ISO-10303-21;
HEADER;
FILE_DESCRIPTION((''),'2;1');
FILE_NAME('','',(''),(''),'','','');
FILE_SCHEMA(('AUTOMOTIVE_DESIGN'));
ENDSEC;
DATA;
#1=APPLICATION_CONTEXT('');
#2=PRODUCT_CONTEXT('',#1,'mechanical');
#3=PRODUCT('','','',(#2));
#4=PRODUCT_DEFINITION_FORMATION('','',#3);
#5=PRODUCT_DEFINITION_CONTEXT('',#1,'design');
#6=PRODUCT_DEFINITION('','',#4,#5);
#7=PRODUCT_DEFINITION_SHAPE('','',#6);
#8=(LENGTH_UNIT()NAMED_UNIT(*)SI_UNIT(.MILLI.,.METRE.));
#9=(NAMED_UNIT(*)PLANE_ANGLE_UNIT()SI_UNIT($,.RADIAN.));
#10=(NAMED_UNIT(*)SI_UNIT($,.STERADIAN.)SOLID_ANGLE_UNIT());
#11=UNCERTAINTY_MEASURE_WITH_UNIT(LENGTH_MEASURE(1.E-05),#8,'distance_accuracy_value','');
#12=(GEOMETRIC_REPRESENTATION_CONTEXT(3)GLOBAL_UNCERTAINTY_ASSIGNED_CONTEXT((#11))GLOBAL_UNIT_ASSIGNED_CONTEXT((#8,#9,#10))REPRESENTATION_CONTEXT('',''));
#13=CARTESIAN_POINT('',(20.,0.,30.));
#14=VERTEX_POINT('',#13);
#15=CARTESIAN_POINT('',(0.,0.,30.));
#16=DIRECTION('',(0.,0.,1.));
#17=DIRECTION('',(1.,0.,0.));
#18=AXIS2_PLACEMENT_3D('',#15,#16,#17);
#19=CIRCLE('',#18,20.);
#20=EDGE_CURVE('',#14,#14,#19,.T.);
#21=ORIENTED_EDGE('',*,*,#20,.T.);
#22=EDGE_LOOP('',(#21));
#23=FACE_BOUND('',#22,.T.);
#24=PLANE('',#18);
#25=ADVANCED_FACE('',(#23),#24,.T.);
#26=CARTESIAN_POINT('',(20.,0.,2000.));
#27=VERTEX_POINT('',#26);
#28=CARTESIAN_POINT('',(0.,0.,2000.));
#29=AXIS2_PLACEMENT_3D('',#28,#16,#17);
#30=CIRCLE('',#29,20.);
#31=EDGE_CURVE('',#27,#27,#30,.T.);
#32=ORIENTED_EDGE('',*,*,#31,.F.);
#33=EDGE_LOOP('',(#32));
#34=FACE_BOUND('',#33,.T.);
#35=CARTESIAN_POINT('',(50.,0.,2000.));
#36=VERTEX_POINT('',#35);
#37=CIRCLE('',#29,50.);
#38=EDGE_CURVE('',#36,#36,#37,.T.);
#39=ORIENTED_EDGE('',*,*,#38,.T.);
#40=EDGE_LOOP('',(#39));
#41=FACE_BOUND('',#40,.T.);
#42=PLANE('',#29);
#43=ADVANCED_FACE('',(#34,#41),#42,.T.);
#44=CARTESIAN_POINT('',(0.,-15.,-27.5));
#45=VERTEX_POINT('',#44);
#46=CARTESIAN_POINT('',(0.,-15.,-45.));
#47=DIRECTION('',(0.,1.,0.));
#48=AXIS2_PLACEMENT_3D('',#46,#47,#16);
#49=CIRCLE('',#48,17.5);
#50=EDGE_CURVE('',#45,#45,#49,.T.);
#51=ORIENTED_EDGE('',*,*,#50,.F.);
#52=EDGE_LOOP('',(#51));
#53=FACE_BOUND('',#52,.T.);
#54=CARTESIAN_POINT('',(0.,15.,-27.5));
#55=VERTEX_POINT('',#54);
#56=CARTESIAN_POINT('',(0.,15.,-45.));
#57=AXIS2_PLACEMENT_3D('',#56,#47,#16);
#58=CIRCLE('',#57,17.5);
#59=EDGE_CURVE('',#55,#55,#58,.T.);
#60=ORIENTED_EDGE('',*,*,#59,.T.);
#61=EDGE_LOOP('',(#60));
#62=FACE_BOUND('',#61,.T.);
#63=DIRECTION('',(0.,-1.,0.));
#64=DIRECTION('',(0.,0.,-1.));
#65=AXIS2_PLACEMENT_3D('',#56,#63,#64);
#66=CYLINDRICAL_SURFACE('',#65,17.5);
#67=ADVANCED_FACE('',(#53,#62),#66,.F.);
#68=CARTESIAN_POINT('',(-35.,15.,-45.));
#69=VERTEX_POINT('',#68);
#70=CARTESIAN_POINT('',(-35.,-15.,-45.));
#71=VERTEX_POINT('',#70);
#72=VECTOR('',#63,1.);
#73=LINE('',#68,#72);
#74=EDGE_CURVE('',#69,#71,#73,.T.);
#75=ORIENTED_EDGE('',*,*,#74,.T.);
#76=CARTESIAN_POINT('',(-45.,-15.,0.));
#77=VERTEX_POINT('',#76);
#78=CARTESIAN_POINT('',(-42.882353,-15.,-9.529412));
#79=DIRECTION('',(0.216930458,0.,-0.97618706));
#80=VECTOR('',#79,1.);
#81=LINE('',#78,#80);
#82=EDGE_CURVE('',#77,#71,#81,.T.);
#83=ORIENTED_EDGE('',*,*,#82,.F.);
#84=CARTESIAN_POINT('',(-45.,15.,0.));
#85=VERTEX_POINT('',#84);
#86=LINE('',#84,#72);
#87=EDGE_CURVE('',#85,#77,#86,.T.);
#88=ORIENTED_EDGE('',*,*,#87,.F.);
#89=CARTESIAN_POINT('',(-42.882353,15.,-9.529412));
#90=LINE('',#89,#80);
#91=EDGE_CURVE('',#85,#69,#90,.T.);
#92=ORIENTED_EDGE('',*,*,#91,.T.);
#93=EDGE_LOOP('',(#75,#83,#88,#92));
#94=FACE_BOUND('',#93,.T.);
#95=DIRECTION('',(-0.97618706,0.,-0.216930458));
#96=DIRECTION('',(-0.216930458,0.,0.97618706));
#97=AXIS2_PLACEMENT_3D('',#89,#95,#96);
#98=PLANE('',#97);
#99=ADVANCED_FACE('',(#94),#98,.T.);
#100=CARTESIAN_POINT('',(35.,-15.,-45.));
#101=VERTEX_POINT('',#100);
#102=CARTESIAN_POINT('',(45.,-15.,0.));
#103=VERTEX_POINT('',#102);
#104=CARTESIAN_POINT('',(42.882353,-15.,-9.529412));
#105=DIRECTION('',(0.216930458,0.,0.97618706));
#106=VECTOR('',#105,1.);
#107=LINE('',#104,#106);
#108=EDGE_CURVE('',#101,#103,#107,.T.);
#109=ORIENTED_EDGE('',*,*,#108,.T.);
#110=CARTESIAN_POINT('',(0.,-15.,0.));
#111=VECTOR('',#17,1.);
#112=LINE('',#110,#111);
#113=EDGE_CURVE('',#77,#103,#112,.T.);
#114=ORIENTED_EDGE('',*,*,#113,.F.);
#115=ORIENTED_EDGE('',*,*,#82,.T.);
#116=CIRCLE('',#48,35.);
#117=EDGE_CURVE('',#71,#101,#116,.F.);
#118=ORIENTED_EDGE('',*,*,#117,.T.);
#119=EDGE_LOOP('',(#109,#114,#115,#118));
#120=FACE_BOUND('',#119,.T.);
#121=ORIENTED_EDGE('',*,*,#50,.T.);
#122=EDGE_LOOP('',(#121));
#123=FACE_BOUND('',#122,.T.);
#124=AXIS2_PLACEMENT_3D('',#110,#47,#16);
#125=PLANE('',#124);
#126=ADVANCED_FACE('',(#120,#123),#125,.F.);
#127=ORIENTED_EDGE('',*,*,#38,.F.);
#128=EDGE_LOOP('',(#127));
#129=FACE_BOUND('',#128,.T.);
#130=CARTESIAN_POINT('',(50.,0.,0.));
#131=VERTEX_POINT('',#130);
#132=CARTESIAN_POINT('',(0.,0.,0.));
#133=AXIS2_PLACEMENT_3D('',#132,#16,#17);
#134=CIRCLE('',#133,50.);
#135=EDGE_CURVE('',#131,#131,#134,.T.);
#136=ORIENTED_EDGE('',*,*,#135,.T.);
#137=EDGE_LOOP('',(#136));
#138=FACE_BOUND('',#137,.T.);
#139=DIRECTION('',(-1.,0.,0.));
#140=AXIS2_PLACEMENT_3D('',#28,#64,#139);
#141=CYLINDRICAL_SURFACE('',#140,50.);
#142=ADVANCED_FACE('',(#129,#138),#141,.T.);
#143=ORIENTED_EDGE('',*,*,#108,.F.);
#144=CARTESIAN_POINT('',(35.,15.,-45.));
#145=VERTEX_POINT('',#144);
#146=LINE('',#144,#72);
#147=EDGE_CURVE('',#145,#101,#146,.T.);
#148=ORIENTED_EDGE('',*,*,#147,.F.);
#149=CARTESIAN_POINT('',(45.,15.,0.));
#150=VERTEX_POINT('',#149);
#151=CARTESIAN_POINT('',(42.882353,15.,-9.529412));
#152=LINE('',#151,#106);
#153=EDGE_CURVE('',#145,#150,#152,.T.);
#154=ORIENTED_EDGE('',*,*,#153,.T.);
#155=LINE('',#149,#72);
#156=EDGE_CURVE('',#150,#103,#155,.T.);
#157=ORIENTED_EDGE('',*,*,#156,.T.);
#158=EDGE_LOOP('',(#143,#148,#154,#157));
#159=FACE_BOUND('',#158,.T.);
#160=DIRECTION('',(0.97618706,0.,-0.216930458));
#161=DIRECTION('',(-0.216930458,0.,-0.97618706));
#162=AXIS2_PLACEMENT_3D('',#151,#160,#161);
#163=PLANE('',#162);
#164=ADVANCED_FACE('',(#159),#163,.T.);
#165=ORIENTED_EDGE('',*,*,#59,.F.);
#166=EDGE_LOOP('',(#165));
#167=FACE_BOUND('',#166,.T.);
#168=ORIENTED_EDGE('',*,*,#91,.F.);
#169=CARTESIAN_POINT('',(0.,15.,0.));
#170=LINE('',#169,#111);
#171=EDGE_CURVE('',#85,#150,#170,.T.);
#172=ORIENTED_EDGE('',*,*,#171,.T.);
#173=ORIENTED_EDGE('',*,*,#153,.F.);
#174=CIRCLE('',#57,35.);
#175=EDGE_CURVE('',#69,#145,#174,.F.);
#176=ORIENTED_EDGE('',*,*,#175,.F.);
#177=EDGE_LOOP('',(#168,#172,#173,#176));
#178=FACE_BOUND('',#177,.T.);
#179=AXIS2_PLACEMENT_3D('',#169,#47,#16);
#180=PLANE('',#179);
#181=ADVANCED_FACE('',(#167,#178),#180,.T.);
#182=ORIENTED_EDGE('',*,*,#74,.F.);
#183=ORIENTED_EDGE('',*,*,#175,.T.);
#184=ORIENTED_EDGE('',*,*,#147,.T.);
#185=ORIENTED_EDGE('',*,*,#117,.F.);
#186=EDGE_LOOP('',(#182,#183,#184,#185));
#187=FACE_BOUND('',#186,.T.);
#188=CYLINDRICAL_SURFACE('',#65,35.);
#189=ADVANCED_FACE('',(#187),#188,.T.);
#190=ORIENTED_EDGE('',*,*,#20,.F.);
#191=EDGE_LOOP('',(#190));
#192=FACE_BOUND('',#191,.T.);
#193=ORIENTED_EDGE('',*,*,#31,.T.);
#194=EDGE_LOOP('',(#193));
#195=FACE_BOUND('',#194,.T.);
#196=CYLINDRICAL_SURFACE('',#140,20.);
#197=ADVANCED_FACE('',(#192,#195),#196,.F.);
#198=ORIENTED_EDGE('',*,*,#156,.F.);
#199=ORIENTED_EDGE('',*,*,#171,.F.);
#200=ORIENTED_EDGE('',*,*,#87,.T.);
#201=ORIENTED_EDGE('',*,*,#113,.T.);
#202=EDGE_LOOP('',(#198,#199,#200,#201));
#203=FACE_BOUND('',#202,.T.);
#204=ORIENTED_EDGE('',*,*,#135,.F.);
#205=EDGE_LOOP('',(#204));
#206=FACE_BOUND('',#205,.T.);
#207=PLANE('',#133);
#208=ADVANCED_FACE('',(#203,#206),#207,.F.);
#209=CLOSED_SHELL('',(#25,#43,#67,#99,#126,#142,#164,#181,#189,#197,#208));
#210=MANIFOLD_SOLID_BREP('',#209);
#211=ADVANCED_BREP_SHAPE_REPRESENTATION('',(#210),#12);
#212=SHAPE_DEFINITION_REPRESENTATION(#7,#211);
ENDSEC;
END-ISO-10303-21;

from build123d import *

# Parameters (mm, degrees)
SKETCH1_R           = 50
BOSS_EXTRUDE1_DEPTH = 2000
SKETCH3_R           = 17.5
BOSS_EXTRUDE2_DEPTH = 15
SHELL1_START        = 30
SHELL1_OUTLINE_R    = 20
SHELL1_DEPTH        = 1970


# Read off the part's stored shape, not the designer's step: Shell1
with BuildPart() as part:
    # Sketch1 → Boss-Extrude1 (new body)
    with BuildSketch(Plane.XY):
        Circle(SKETCH1_R)
    extrude(amount=BOSS_EXTRUDE1_DEPTH)

    # Sketch3 → Boss-Extrude2 (add, symmetric)
    with BuildSketch(Plane(origin=(0, 0, 0), x_dir=(1, 0, 0), z_dir=(0, 1, 0))):
        with BuildLine():
            ThreePointArc((-35, 45), (0, 80), (35, 45))
            Line((35, 45), (45, 0))
            Line((45, 0), (-45, 0))
            Line((-45, 0), (-35, 45))
        make_face()
        with Locations(Location((0, 45, 0), (0, 0, 270))):
            Circle(SKETCH3_R, mode=Mode.SUBTRACT)
    extrude(amount=BOSS_EXTRUDE2_DEPTH, both=True)

    # Shell1 outline → Shell1 (cut)
    with BuildSketch(Plane.XY.offset(SHELL1_START)):
        Circle(SHELL1_OUTLINE_R)
    extrude(amount=SHELL1_DEPTH, mode=Mode.SUBTRACT)


solid = part.part
